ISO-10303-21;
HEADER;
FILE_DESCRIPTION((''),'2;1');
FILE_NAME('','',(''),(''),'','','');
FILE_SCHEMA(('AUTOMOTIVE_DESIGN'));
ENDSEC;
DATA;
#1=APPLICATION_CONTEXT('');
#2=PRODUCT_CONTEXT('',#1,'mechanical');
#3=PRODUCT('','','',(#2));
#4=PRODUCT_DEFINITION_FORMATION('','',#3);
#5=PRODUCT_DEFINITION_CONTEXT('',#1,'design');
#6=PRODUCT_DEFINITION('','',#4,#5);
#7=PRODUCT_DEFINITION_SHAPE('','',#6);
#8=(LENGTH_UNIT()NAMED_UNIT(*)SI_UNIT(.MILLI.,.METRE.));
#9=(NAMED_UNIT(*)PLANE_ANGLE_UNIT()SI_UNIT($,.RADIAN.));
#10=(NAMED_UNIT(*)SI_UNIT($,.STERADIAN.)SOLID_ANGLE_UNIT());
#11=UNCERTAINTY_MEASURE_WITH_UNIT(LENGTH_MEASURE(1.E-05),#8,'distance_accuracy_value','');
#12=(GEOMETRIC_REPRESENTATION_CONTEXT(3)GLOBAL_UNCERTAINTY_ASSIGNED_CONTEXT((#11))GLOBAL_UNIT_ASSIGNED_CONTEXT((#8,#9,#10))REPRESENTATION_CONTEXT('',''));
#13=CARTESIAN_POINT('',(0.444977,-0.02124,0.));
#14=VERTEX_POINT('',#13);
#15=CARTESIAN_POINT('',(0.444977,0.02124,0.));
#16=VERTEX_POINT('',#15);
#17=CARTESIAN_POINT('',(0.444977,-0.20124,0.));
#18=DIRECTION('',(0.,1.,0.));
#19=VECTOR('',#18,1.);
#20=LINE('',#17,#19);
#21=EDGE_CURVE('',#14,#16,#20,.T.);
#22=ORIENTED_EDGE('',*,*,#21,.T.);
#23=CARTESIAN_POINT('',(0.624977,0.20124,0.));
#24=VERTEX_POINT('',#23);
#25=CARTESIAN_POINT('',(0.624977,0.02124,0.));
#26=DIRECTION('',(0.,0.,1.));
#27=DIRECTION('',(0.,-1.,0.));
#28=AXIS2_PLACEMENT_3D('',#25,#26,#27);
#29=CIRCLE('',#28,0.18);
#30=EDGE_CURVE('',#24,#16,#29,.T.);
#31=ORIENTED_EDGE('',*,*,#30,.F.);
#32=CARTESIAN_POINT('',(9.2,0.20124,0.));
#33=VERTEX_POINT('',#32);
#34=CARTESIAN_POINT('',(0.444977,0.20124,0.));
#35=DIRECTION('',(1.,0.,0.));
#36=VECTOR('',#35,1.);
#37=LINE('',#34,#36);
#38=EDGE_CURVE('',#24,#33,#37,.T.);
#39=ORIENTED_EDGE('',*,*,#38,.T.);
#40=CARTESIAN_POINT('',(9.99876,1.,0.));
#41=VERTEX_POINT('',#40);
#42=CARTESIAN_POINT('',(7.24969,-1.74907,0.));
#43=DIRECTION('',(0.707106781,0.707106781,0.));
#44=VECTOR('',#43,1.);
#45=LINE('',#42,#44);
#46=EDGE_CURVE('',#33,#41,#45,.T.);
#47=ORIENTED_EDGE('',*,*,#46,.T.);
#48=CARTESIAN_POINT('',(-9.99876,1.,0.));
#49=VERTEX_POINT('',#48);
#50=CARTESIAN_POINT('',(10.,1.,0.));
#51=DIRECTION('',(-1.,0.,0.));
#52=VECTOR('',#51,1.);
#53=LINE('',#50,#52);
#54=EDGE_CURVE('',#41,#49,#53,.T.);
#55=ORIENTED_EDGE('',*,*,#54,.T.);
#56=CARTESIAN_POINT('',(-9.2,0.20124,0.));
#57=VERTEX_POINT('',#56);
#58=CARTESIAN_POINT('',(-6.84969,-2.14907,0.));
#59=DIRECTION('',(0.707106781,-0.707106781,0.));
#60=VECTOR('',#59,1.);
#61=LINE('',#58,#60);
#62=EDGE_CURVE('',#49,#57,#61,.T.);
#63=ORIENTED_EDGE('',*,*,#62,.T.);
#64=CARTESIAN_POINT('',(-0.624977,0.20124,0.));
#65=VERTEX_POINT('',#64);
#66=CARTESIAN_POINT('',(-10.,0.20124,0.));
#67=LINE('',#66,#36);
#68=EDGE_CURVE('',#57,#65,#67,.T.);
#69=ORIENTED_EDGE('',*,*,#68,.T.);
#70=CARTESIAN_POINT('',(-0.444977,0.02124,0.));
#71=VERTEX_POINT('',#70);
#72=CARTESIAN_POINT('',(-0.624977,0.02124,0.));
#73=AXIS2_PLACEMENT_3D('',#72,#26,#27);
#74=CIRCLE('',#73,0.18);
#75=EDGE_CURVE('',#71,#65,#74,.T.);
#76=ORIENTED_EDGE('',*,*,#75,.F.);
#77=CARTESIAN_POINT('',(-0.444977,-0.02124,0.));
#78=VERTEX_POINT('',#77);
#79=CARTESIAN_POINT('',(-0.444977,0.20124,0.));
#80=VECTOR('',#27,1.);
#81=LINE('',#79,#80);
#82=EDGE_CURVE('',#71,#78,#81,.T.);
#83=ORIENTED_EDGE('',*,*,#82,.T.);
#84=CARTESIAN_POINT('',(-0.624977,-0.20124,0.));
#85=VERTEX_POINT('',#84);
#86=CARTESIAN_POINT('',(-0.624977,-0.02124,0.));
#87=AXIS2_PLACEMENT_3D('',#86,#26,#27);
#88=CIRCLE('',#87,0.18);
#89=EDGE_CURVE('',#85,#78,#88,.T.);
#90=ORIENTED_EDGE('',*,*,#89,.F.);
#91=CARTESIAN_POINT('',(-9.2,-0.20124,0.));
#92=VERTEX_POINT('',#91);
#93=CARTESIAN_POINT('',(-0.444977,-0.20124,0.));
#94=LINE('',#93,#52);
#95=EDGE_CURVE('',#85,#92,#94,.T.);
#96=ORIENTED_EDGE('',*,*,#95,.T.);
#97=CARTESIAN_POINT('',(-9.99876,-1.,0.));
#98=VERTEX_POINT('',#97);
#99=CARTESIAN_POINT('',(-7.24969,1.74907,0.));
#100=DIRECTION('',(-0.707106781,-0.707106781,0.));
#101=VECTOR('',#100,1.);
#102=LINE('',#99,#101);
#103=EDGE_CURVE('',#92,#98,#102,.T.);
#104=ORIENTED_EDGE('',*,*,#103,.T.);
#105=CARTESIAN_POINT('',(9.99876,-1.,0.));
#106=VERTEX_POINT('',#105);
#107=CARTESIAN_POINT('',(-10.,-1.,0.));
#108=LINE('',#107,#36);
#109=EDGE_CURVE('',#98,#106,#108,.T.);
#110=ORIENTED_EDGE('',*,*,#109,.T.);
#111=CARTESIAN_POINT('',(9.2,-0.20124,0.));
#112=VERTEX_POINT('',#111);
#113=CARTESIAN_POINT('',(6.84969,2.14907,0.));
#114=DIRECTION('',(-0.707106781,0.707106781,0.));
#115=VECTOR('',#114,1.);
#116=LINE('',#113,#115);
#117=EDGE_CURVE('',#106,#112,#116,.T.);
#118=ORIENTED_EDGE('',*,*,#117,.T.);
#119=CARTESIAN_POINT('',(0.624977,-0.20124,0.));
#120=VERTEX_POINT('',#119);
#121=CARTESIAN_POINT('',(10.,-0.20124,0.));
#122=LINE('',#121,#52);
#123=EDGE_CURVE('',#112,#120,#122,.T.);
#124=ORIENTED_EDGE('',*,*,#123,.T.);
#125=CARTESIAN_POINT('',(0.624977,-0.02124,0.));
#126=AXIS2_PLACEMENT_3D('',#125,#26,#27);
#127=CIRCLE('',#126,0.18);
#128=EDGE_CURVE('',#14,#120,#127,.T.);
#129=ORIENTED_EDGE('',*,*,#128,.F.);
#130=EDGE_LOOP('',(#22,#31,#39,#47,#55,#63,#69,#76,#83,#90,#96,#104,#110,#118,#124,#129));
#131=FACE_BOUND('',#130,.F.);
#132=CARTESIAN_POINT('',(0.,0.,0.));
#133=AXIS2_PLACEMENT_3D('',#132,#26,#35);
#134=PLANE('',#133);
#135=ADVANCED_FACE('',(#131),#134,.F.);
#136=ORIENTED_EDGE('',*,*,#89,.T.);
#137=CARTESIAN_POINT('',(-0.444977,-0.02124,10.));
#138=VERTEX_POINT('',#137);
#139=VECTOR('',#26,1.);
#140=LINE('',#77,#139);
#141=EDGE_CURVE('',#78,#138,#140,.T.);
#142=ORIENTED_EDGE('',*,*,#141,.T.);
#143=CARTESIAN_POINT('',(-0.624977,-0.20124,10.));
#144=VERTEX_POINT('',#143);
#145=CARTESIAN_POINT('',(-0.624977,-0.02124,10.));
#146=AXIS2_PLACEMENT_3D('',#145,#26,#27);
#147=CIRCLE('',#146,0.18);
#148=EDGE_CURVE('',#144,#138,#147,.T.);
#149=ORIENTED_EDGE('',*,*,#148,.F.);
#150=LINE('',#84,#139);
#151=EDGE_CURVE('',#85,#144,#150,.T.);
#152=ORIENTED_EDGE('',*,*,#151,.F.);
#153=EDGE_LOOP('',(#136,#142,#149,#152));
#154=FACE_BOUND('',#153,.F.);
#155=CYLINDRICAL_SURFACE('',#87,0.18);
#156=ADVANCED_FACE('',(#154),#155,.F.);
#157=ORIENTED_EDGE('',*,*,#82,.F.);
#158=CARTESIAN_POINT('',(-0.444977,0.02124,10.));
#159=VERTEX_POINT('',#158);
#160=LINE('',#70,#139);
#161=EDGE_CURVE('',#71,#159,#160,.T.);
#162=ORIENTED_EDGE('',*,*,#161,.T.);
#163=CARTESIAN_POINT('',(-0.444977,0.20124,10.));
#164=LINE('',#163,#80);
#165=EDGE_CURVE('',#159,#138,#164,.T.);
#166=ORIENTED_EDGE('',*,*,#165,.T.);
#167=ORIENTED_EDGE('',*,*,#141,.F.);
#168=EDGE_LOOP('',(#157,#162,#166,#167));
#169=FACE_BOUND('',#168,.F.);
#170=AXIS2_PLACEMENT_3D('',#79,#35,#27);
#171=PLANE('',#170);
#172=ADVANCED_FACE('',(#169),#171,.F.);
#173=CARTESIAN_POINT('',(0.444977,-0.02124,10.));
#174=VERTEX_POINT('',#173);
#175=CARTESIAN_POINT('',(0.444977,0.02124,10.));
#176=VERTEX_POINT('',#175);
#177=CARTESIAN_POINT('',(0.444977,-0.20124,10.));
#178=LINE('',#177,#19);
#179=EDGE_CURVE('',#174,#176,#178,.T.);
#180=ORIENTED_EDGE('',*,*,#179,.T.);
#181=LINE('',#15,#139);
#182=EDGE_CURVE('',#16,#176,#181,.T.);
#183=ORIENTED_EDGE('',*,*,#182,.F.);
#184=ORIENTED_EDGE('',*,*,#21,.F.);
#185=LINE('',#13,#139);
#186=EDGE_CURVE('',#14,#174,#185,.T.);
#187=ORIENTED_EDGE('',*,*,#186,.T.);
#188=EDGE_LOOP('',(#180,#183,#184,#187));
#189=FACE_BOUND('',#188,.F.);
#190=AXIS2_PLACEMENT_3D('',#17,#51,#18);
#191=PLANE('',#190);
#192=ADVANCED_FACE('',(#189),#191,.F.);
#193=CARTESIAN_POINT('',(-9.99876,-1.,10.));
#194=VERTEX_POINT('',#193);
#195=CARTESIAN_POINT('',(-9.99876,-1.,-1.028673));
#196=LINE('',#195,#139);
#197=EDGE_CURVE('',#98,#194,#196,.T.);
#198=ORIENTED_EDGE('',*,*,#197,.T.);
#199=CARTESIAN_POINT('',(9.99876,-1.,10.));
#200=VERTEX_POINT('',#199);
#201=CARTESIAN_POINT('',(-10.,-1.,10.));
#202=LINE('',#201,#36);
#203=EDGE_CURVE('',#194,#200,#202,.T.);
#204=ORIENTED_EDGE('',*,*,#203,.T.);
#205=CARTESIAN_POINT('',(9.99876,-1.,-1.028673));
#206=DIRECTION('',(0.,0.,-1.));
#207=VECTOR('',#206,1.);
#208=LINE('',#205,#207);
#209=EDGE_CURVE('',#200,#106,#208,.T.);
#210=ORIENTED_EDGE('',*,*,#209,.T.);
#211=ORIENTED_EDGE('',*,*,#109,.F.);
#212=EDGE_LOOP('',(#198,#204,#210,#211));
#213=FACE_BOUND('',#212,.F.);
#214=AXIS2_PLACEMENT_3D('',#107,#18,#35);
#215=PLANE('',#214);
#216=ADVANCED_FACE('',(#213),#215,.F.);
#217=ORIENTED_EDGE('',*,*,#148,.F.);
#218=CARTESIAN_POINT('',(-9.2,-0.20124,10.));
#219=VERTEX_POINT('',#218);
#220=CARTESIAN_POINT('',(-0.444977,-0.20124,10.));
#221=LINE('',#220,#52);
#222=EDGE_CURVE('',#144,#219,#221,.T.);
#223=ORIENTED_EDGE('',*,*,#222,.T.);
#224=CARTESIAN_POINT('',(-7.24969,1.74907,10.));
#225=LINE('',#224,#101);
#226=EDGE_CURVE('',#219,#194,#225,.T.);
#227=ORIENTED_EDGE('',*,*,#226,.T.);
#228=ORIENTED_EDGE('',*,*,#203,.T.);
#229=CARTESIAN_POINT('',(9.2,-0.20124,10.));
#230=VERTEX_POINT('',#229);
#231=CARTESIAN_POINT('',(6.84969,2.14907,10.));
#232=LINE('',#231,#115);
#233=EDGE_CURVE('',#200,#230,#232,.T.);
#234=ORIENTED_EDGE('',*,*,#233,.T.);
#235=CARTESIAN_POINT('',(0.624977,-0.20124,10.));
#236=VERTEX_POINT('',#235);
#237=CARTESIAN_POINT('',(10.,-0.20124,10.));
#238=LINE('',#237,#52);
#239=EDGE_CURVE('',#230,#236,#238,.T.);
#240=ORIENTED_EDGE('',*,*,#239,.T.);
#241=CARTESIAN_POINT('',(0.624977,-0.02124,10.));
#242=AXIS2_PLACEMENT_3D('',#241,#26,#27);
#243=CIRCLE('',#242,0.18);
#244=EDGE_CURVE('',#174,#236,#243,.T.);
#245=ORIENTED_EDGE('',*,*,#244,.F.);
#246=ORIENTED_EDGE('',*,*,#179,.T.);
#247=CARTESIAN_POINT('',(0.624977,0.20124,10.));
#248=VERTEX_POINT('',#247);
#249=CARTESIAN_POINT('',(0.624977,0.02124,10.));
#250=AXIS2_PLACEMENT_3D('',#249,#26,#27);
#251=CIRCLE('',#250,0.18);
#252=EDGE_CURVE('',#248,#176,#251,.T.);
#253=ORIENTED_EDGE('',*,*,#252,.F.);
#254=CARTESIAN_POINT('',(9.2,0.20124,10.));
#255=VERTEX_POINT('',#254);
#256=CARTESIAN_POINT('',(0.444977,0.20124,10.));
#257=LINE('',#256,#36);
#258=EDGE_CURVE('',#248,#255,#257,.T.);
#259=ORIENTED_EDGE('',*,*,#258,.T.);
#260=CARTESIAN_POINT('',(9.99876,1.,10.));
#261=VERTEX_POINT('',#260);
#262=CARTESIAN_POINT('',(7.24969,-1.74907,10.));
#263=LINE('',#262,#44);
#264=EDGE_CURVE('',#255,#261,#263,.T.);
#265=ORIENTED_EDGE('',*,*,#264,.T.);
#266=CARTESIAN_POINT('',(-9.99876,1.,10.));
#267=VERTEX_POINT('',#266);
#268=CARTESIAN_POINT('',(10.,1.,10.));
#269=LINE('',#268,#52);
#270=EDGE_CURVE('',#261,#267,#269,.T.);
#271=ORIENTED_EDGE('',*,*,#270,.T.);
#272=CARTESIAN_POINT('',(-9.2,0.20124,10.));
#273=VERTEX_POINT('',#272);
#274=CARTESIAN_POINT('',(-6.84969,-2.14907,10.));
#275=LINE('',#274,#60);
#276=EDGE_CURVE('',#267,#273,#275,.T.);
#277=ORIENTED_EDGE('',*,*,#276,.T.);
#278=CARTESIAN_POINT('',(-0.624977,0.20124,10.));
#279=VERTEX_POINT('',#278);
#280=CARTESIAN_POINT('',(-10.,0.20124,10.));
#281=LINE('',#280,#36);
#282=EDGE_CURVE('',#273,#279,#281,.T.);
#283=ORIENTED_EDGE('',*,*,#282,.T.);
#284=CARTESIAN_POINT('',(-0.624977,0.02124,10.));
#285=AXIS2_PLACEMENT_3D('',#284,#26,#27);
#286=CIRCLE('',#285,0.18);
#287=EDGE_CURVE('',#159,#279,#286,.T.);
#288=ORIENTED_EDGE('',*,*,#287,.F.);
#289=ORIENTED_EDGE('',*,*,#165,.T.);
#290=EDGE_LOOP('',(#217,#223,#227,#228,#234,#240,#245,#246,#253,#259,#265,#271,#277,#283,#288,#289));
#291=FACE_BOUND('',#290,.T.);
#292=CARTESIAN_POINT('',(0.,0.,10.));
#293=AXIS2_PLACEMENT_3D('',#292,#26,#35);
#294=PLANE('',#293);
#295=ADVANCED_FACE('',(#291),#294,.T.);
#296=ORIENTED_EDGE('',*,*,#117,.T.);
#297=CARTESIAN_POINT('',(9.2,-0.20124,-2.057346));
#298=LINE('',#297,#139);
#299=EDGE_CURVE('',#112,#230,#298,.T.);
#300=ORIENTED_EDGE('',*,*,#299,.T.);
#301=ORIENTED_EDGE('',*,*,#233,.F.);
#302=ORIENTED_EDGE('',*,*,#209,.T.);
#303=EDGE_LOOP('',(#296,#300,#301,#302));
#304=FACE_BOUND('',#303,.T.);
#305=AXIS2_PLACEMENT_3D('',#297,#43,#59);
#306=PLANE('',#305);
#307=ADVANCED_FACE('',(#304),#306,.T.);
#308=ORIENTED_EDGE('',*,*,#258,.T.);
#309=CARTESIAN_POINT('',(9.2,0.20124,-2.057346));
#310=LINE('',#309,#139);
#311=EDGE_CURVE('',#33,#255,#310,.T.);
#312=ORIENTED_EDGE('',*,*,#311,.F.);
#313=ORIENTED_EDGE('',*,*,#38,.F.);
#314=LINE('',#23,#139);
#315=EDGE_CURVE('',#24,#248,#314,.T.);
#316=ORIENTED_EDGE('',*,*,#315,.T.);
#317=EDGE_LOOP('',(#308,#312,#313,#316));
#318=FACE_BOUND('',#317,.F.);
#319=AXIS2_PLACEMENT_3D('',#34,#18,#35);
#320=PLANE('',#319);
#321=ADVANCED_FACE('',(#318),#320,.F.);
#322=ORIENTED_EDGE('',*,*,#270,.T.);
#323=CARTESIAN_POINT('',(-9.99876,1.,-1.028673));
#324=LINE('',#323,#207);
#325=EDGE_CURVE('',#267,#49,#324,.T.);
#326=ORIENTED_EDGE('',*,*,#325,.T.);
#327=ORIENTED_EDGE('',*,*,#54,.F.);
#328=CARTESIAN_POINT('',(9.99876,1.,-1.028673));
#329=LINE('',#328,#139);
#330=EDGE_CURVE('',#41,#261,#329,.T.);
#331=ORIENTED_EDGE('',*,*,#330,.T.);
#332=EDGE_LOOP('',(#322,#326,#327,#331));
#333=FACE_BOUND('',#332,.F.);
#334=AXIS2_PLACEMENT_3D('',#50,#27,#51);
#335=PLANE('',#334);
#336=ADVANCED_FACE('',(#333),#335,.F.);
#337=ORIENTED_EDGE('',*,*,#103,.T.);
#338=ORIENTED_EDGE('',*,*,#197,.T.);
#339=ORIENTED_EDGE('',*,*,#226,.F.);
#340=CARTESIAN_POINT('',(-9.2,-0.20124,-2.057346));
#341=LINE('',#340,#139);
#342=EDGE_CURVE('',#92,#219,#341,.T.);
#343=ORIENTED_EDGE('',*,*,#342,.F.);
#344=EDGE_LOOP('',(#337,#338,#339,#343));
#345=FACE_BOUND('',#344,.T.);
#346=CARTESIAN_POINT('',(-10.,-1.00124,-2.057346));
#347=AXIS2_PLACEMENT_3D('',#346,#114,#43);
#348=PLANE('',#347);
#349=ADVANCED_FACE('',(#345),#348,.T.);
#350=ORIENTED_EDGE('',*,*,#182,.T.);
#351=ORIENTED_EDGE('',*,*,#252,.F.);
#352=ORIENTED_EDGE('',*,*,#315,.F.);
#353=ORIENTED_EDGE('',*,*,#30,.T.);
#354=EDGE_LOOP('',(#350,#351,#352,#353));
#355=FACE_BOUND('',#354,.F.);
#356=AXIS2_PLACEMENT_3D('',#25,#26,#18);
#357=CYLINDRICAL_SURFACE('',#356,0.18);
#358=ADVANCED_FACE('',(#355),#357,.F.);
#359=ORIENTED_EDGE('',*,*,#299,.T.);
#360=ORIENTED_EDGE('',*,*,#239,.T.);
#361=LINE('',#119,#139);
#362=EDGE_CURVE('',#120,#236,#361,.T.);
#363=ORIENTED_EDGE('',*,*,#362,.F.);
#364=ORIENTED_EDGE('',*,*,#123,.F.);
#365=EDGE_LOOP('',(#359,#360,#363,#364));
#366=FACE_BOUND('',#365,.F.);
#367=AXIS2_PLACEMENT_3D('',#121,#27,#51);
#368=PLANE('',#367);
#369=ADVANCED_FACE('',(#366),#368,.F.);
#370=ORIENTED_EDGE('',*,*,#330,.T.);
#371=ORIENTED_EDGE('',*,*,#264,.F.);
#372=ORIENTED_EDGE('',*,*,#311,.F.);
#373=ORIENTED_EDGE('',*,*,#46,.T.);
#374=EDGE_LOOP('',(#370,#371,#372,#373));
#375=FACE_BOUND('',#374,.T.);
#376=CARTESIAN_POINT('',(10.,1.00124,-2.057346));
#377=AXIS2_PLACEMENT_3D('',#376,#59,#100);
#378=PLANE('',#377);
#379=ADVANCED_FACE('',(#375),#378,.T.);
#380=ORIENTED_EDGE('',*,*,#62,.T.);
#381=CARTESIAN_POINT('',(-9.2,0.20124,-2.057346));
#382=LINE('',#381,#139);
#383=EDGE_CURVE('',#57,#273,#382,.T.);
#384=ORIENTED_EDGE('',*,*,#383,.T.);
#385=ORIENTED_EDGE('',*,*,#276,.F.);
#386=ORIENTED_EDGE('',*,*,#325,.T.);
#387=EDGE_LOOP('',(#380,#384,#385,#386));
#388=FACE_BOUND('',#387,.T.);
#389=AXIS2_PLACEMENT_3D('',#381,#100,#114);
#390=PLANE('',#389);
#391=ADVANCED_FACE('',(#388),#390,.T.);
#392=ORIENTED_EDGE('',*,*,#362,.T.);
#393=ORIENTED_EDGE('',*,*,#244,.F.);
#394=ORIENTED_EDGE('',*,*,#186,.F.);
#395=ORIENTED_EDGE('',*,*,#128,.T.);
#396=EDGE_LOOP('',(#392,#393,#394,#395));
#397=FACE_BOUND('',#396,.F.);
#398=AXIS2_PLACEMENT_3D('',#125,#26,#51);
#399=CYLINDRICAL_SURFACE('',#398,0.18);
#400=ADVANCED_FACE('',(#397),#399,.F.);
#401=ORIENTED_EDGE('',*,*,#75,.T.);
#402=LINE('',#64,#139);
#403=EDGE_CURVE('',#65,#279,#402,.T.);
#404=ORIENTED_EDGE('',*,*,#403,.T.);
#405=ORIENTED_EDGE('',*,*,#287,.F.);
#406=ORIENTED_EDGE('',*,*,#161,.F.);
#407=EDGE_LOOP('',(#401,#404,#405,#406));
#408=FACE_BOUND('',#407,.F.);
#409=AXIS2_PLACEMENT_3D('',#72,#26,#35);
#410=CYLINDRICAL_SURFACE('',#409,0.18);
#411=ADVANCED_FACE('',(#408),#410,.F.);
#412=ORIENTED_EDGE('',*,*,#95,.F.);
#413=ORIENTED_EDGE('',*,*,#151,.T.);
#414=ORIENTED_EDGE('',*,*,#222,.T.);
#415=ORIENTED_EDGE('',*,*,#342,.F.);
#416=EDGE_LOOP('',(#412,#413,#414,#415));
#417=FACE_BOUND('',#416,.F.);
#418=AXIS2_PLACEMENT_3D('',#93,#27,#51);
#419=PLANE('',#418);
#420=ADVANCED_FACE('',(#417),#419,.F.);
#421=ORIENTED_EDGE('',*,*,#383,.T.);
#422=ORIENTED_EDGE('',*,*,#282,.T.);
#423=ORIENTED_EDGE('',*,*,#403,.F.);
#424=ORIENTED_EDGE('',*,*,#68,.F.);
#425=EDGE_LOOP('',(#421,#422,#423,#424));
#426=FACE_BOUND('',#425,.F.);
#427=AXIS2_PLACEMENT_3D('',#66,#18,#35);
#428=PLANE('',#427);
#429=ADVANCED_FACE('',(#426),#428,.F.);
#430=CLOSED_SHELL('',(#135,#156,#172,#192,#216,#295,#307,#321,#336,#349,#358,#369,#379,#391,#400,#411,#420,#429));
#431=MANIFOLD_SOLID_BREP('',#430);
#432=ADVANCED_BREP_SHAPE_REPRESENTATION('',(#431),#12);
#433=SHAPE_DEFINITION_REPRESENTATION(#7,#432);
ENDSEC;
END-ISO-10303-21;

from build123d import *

# Parameters (mm, degrees)
F1_DEPTH    = 10
F2_T1_DEPTH = 14.1146927807
F3_R        = 0.18


# Not quite as in the source:
# - a fillet or chamfer that OpenCascade refuses, or shapes differently, is made with other operations: its cross-section is extruded or revolved along the edge and cut away or added


with BuildPart() as f1:
    # F0 (on Top) → F1 (new body)
    with BuildSketch(Plane.XY):
        Polygon((10, 0.2012402692), (10, 1), (0.4449767875, 1), (-0.4449767875, 1), (-10, 1), (-10, 0.2012402692), (-0.4449767875, 0.2012402692), (-0.4449767875, -0.2012402692), (-10, -0.2012402692), (-10, -1), (-0.4449767875, -1), (0.4449767875, -1), (10, -1), (10, -0.2012402692), (0.4449767875, -0.2012402692), (0.4449767875, 0.2012402692), align=None)
    extrude(amount=F1_DEPTH)

    # F2: chamfer of 0.8 on 4 edges, made by hand

    # F2_s2 → F2_t1 (cut)
    with BuildSketch(Plane.XY.offset(-2.0573463904)):
        Polygon((-10, -1.0012402692), (-9.2, -0.2012402692), (-10, -0.2012402692), align=None)
        Polygon((-9.2, 0.2012402692), (-10, 1.0012402692), (-10, 0.2012402692), align=None)
        Polygon((9.2, -0.2012402692), (10, -1.0012402692), (10, -0.2012402692), align=None)
        Polygon((10, 1.0012402692), (9.2, 0.2012402692), (10, 0.2012402692), align=None)
    extrude(amount=F2_T1_DEPTH, mode=Mode.SUBTRACT)

    # F3
    f3_edges = [f1.edges().sort_by_distance(p)[0] for p in [
        (-0.444977, -0.20124, 5),
        (-0.444977, 0.20124, 5),
        (0.444977, 0.20124, 5),
        (0.444977, -0.20124, 5),
    ]]
    fillet(f3_edges, radius=F3_R)


solid = f1.part
